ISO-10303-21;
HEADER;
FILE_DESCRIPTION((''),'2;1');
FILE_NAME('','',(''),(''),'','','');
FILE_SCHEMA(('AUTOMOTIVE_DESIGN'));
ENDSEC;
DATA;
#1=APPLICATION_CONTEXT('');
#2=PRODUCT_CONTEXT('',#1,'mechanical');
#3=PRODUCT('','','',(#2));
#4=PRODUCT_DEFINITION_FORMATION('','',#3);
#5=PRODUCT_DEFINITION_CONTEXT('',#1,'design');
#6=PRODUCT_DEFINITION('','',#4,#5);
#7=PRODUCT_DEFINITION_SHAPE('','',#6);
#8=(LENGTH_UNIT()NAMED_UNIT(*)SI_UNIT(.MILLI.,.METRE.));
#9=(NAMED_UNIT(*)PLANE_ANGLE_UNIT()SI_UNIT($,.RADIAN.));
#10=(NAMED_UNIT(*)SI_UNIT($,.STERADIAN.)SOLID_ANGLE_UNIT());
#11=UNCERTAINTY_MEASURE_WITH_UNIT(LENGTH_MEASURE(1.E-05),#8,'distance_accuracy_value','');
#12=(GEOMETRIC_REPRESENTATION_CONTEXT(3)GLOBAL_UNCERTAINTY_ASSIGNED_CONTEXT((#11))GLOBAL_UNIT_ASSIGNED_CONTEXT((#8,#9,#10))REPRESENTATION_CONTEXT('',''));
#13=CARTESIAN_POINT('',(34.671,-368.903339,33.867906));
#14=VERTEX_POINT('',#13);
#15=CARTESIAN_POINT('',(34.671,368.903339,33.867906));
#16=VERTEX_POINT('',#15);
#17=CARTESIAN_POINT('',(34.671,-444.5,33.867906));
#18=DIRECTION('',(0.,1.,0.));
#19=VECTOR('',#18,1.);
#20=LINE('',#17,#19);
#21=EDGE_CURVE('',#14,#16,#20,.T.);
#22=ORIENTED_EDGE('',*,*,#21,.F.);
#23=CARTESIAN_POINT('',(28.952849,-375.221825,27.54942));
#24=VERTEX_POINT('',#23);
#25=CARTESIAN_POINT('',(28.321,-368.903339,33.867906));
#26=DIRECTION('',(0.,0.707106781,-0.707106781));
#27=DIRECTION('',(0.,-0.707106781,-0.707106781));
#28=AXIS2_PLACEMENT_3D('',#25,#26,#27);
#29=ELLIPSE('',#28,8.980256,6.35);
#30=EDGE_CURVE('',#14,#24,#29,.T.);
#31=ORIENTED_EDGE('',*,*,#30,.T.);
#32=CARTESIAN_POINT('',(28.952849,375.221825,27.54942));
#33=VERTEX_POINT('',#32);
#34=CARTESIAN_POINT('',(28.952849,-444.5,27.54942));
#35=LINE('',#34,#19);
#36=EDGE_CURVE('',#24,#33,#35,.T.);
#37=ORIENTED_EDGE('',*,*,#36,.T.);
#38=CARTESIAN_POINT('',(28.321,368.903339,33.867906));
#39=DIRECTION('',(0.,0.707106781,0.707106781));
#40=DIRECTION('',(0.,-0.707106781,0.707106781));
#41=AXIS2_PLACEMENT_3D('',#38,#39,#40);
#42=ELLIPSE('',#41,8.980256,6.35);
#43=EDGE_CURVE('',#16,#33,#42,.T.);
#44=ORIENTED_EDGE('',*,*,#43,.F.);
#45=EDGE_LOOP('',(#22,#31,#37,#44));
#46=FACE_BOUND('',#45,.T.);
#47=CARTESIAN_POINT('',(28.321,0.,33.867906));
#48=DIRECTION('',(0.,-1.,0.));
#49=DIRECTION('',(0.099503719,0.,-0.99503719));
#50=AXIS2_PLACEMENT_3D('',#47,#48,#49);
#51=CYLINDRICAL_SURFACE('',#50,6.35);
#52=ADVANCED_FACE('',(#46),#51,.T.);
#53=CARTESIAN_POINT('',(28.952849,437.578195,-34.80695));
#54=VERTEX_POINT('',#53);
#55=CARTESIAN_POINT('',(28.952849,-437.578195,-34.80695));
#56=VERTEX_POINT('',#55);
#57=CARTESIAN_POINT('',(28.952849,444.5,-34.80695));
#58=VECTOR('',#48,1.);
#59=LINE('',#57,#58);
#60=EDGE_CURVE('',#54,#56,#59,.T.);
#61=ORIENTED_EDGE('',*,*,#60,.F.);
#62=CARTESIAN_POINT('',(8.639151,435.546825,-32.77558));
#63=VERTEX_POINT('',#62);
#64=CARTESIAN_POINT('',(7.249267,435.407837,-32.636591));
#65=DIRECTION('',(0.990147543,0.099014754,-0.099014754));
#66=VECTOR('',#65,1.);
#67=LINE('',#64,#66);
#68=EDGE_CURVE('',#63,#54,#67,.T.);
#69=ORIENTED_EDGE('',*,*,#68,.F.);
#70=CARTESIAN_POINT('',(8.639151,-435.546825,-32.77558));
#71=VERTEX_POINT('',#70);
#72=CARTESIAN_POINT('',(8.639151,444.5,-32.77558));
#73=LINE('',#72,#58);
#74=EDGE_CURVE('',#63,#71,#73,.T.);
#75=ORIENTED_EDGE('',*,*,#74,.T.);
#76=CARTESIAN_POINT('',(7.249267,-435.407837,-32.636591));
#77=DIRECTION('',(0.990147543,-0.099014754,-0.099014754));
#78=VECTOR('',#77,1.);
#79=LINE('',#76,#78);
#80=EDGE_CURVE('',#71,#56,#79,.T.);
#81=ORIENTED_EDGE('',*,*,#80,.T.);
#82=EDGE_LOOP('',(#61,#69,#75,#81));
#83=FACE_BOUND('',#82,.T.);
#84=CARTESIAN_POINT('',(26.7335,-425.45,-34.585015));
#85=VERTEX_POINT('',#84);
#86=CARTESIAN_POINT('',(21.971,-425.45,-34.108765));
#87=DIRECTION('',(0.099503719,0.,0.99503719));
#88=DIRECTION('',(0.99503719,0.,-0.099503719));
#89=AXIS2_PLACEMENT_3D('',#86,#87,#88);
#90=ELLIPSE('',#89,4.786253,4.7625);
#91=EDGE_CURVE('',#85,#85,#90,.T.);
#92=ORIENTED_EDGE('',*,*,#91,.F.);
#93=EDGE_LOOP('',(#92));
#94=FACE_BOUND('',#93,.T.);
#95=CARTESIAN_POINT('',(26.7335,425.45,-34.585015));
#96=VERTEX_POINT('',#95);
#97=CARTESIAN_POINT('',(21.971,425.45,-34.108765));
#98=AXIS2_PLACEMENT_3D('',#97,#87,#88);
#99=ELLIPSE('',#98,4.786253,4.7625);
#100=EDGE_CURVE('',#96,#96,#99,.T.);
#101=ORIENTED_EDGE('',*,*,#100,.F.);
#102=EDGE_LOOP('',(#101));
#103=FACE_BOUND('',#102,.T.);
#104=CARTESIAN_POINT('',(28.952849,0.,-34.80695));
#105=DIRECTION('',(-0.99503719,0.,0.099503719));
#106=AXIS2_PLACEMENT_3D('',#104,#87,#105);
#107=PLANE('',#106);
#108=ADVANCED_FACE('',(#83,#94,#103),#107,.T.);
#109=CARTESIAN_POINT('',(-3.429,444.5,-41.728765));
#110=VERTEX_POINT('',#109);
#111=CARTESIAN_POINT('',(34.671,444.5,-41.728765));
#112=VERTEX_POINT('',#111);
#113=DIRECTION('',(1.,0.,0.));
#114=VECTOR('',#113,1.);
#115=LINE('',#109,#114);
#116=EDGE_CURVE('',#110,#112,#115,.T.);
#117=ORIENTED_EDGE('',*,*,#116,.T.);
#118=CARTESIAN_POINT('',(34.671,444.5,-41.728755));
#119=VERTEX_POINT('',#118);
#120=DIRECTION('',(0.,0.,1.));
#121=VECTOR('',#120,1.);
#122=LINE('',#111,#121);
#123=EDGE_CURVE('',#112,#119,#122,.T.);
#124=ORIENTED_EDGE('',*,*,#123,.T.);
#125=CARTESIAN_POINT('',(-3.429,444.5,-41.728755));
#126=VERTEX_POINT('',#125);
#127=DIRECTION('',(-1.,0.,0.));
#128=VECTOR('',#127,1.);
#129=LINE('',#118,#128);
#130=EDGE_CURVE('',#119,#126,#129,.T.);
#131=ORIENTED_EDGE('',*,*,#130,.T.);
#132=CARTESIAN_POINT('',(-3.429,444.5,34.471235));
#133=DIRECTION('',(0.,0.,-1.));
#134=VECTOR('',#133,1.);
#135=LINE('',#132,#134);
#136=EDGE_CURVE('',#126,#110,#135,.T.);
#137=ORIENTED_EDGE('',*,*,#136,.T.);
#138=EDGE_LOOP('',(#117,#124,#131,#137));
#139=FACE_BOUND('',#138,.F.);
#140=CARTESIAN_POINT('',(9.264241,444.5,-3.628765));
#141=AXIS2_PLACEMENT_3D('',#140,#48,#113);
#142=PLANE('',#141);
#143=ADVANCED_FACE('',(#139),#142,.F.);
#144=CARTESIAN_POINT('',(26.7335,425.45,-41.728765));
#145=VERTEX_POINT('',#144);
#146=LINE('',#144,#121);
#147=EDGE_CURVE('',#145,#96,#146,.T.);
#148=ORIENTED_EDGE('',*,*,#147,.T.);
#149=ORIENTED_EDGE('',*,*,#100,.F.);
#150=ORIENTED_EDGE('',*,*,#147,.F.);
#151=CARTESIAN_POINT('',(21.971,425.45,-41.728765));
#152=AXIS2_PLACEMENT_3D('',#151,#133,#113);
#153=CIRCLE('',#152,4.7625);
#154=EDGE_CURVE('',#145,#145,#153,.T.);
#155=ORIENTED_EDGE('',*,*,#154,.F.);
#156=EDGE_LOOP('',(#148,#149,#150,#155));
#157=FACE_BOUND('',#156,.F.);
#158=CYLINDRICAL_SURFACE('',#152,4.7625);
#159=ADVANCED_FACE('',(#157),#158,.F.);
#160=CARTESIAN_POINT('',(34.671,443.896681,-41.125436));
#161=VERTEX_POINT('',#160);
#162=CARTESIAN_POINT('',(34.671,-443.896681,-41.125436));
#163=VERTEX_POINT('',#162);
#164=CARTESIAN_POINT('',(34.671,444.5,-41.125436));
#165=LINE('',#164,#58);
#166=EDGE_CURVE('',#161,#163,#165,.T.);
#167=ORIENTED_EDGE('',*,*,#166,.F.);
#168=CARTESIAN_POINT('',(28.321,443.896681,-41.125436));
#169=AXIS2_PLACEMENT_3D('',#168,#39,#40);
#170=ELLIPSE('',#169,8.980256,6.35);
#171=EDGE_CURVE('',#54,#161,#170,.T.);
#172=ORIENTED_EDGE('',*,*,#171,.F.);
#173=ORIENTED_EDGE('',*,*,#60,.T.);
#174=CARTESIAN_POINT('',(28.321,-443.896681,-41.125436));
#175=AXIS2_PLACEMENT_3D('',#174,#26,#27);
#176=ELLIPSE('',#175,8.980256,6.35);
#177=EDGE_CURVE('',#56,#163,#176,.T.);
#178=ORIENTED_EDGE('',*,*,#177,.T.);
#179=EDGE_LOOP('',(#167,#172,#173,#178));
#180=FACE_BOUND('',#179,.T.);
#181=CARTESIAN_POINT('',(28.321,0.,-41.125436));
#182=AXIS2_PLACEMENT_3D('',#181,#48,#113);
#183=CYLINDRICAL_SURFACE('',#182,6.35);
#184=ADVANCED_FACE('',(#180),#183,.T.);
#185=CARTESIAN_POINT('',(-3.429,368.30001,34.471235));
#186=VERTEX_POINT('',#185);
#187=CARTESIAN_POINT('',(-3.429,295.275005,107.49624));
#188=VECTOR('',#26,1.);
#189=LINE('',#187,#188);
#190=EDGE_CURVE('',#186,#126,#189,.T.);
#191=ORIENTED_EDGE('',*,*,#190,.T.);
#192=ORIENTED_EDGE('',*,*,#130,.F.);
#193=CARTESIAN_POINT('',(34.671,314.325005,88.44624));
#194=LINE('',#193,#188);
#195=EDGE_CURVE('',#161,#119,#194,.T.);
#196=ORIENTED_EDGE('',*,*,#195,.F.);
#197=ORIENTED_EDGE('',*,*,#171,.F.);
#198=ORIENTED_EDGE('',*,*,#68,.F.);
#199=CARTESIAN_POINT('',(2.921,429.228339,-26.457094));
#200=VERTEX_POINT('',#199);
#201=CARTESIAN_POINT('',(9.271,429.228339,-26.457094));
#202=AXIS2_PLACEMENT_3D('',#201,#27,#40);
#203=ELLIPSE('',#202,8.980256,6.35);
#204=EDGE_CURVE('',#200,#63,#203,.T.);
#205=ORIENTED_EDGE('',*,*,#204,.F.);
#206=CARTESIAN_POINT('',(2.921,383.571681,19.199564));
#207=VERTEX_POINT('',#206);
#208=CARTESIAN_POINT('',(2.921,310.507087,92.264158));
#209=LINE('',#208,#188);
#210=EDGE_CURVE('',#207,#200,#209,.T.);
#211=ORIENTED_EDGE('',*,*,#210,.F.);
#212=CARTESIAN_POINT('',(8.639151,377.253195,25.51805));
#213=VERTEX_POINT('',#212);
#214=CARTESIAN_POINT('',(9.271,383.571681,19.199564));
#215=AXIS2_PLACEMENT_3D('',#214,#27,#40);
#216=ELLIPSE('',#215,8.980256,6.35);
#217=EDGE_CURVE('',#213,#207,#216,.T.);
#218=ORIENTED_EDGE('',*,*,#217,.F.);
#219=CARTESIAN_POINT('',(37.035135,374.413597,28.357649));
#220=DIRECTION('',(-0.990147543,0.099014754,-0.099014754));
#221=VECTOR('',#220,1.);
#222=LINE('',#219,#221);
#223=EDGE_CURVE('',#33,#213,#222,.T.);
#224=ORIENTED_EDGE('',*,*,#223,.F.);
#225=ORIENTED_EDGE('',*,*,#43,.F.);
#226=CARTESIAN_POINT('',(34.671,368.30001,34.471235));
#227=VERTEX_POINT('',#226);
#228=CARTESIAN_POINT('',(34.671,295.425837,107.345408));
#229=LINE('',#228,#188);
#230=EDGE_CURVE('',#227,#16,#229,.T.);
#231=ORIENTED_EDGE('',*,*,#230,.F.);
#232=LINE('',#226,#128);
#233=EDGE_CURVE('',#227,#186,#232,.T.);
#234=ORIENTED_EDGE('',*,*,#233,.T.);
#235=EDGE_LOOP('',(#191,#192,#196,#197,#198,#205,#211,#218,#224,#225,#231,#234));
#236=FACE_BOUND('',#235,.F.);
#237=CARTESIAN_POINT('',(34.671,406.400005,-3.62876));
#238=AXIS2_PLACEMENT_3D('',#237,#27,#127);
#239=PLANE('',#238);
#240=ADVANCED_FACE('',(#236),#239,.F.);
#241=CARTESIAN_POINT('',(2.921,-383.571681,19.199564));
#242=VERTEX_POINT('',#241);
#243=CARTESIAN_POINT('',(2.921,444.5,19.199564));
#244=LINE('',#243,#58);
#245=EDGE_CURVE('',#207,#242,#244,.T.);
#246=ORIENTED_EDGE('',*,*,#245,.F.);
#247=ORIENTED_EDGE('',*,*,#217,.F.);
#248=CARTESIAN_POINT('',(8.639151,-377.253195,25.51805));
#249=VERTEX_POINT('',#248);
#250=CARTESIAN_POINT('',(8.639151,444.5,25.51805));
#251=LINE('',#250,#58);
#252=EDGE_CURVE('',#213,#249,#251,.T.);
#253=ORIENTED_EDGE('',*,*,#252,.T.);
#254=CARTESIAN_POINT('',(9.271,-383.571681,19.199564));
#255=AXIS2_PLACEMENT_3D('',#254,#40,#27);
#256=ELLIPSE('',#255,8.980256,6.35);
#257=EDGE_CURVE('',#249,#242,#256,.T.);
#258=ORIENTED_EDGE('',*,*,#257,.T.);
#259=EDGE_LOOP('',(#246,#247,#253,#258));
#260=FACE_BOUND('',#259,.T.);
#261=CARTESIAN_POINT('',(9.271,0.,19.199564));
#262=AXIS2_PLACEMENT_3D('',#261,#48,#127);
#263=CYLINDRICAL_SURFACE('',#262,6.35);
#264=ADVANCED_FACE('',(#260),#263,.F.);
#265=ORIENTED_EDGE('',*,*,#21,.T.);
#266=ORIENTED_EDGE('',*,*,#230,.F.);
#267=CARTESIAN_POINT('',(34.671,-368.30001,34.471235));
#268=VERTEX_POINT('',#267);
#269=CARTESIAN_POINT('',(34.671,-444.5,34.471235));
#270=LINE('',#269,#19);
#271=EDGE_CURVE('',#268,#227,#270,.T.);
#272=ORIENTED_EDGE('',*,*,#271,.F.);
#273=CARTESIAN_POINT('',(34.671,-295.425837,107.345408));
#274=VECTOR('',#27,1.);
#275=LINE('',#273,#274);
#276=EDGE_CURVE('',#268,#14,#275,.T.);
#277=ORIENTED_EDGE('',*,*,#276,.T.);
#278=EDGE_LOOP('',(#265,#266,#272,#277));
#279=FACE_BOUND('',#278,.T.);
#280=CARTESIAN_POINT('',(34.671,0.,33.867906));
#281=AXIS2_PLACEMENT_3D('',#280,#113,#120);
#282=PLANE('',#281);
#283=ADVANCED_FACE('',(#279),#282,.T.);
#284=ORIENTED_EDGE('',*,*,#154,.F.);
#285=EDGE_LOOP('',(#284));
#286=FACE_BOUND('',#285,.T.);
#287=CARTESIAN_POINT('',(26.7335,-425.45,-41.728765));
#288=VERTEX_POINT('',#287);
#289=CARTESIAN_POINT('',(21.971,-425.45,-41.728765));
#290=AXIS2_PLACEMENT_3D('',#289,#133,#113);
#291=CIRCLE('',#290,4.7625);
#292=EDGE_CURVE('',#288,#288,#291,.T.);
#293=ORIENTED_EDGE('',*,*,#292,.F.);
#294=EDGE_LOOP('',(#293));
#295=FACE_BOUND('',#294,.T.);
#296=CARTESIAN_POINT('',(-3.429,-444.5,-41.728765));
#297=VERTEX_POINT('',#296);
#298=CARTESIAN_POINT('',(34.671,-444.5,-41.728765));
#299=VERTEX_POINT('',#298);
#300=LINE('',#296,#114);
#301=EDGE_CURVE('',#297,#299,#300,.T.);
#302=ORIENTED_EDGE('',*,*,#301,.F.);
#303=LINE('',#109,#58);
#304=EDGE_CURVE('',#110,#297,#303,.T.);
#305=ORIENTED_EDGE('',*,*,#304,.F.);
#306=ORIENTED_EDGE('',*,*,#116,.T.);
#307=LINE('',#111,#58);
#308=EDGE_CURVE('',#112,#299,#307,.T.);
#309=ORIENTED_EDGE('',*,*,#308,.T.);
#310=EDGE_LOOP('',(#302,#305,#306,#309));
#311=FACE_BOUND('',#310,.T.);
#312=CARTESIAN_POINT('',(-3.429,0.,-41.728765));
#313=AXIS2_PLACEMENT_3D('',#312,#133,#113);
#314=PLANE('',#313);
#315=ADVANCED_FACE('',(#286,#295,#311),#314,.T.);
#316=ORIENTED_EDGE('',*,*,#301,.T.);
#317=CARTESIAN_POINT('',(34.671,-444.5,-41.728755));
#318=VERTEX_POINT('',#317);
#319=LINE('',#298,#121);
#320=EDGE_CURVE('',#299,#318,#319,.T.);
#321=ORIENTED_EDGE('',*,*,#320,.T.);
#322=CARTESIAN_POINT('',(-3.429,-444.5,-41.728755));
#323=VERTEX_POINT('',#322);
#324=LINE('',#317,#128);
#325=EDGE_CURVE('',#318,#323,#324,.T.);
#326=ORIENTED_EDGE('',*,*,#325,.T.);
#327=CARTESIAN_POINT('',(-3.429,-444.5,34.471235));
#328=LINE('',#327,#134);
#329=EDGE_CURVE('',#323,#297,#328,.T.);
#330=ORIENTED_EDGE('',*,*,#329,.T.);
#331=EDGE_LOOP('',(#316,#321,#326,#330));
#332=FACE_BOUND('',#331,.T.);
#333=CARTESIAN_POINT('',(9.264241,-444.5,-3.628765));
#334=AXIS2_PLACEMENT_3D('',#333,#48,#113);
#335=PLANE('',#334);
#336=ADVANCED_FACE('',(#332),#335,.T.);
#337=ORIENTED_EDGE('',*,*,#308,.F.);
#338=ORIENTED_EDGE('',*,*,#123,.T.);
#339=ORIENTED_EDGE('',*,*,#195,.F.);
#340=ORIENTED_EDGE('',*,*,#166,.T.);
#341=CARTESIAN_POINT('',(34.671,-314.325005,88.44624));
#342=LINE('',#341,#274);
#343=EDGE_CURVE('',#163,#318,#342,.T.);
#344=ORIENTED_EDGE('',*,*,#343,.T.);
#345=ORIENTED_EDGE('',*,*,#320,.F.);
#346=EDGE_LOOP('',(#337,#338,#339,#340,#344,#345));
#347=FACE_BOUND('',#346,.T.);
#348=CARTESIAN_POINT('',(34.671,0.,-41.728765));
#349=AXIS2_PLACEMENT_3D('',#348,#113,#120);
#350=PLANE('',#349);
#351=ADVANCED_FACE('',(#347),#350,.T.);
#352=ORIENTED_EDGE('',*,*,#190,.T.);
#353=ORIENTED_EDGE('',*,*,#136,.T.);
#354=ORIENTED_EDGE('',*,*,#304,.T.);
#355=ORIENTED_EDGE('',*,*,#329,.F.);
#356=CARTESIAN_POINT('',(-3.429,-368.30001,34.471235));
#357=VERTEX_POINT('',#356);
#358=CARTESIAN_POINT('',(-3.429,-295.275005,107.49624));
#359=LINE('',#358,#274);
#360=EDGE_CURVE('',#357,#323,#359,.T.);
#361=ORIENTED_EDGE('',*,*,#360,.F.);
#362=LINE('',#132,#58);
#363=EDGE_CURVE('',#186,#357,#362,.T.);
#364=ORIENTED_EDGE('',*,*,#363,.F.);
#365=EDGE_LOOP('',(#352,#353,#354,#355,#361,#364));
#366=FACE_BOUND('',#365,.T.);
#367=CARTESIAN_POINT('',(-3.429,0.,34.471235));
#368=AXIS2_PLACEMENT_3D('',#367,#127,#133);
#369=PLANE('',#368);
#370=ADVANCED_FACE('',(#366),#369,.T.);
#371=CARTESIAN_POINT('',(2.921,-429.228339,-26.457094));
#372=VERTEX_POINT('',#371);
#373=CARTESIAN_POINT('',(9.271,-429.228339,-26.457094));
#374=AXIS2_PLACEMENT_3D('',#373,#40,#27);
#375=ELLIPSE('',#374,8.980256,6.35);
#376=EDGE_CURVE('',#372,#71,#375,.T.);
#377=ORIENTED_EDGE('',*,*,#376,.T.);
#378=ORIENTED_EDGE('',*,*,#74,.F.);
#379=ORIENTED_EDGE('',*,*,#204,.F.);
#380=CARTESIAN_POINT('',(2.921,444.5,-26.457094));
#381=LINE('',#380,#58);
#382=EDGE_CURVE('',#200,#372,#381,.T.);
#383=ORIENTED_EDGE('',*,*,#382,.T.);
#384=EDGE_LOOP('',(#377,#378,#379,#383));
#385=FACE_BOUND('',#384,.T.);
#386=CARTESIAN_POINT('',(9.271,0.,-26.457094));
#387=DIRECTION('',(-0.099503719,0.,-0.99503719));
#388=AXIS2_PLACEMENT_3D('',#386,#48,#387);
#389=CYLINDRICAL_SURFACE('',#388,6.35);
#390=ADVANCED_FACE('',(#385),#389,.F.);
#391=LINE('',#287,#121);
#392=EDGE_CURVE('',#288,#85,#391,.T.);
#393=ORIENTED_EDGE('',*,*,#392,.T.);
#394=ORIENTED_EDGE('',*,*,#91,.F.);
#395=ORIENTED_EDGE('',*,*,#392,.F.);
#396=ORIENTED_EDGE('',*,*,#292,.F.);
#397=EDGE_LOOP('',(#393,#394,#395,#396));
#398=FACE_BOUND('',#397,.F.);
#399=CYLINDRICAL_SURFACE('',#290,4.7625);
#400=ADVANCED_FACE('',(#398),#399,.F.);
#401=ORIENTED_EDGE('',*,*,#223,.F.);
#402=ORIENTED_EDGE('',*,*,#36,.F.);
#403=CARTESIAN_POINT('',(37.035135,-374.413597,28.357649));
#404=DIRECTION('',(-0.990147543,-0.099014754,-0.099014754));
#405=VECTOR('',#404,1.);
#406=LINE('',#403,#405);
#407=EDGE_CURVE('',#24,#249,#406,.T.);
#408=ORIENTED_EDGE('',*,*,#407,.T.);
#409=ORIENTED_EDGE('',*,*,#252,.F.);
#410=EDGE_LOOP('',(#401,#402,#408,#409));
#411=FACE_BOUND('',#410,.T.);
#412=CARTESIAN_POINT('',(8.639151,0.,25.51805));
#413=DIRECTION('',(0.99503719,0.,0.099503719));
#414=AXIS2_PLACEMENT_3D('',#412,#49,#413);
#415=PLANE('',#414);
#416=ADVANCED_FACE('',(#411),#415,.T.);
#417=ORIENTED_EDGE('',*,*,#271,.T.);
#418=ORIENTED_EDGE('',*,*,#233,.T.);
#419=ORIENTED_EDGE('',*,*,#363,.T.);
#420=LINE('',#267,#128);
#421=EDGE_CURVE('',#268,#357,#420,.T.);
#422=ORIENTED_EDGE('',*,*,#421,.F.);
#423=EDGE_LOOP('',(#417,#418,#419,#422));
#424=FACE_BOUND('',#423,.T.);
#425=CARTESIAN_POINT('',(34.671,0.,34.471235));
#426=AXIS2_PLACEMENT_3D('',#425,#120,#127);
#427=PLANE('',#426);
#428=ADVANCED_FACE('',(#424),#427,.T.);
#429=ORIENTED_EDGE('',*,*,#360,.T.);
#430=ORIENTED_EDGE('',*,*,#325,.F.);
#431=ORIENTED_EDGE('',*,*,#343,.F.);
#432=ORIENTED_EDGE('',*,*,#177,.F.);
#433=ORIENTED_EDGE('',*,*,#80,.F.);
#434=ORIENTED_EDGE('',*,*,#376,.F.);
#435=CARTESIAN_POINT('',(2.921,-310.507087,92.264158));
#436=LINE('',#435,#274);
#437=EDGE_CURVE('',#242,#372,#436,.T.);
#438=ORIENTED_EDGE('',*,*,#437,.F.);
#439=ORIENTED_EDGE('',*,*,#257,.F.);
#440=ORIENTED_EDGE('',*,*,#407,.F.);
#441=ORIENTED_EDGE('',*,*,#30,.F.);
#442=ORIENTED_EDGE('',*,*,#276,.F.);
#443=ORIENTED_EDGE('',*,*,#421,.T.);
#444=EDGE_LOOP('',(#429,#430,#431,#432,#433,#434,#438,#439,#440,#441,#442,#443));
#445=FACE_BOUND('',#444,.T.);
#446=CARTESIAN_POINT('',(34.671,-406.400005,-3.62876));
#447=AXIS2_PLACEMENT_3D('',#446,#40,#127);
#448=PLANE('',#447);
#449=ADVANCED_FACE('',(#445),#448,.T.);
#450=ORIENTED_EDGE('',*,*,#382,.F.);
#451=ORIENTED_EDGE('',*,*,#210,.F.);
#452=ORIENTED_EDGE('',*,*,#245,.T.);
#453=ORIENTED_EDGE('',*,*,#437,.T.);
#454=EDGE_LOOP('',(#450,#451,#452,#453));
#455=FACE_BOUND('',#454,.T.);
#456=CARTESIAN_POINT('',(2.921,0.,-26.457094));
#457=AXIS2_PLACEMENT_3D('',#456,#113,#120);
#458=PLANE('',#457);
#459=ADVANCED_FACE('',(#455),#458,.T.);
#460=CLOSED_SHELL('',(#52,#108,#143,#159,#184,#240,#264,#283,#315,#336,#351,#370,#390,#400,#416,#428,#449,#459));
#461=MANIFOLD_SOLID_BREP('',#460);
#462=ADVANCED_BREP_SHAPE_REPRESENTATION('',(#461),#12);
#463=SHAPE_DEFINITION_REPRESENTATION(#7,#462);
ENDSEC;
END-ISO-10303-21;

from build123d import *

# Parameters (mm, degrees)
F1_DEPTH = 444.5
F2_SIZE  = 76.19999
F3_SIZE  = 76.19999
F4_R     = 4.7625
F5_DEPTH = 25.4
F6_DEPTH = 25.4


# Not quite as in the source:
# - a fillet or chamfer is up to 0.001 mm smaller than in the source, because OpenCascade refuses the exact size


with BuildPart() as f1:
    # F0 (on Front) → F1 (new body, symmetric)
    with BuildSketch(Plane.XZ):
        with BuildLine():
            Line((34.6709999669, 34.4712352276), (-3.4290000331, 34.4712352276))
            Line((-3.4290000331, 34.4712352276), (-3.4290000331, -41.7287647724))
            Line((-3.4290000331, -41.7287647724), (34.6709999669, -41.7287647724))
            Line((34.6709999669, -41.7287647724), (34.6709999669, -41.1254357918))
            ThreePointArc((34.6709999669, -41.1254357918), (33.029223555, -36.864552005), (28.9528485827, -34.806949634))
            Line((28.9528485827, -34.806949634), (8.6391513512, -32.7755799108))
            ThreePointArc((8.6391513512, -32.7755799108), (4.5627763789, -30.7179775398), (2.9209999669, -26.457093753))
            Line((2.9209999669, -26.457093753), (2.9209999669, 19.1995642082))
            ThreePointArc((2.9209999669, 19.1995642082), (4.5627763789, 23.460447995), (8.6391513512, 25.518050366))
            Line((8.6391513512, 25.518050366), (28.9528485827, 27.5494200892))
            ThreePointArc((28.9528485827, 27.5494200892), (33.029223555, 29.6070224602), (34.6709999669, 33.867906247))
            Line((34.6709999669, 33.867906247), (34.6709999669, 34.4712352276))
        make_face()
    extrude(amount=F1_DEPTH, both=True)

    # F2 (size 76.2 in the source; OpenCascade refuses exactly that, so slightly less here)
    f2_edges = [f1.edges().sort_by_distance(p)[0] for p in [
        (15.621, -444.5, 34.471235),
    ]]
    chamfer(f2_edges, length=F2_SIZE)

    # F3 (size 76.2 in the source; OpenCascade refuses exactly that, so slightly less here)
    f3_edges = [f1.edges().sort_by_distance(p)[0] for p in [
        (15.621, 444.5, 34.471235),
    ]]
    chamfer(f3_edges, length=F3_SIZE)

    # F4 (on face) → F5 (cut)
    with BuildSketch(Plane(origin=(0, 0, -41.7287647724), x_dir=(1, 0, 0), z_dir=(0, 0, -1))):
        with Locations((21.9709999669, 425.45)):
            Circle(F4_R)
    extrude(amount=-F5_DEPTH, mode=Mode.SUBTRACT)

    # F4 (on face) → F6 (cut)
    with BuildSketch(Plane(origin=(0, 0, -41.7287647724), x_dir=(1, 0, 0), z_dir=(0, 0, -1))):
        with Locations((21.9709999669, 425.45)):
            Circle(F4_R)
        with Locations((21.9709999669, -425.45)):
            Circle(F4_R)
    extrude(amount=-F6_DEPTH, mode=Mode.SUBTRACT)


solid = f1.part
